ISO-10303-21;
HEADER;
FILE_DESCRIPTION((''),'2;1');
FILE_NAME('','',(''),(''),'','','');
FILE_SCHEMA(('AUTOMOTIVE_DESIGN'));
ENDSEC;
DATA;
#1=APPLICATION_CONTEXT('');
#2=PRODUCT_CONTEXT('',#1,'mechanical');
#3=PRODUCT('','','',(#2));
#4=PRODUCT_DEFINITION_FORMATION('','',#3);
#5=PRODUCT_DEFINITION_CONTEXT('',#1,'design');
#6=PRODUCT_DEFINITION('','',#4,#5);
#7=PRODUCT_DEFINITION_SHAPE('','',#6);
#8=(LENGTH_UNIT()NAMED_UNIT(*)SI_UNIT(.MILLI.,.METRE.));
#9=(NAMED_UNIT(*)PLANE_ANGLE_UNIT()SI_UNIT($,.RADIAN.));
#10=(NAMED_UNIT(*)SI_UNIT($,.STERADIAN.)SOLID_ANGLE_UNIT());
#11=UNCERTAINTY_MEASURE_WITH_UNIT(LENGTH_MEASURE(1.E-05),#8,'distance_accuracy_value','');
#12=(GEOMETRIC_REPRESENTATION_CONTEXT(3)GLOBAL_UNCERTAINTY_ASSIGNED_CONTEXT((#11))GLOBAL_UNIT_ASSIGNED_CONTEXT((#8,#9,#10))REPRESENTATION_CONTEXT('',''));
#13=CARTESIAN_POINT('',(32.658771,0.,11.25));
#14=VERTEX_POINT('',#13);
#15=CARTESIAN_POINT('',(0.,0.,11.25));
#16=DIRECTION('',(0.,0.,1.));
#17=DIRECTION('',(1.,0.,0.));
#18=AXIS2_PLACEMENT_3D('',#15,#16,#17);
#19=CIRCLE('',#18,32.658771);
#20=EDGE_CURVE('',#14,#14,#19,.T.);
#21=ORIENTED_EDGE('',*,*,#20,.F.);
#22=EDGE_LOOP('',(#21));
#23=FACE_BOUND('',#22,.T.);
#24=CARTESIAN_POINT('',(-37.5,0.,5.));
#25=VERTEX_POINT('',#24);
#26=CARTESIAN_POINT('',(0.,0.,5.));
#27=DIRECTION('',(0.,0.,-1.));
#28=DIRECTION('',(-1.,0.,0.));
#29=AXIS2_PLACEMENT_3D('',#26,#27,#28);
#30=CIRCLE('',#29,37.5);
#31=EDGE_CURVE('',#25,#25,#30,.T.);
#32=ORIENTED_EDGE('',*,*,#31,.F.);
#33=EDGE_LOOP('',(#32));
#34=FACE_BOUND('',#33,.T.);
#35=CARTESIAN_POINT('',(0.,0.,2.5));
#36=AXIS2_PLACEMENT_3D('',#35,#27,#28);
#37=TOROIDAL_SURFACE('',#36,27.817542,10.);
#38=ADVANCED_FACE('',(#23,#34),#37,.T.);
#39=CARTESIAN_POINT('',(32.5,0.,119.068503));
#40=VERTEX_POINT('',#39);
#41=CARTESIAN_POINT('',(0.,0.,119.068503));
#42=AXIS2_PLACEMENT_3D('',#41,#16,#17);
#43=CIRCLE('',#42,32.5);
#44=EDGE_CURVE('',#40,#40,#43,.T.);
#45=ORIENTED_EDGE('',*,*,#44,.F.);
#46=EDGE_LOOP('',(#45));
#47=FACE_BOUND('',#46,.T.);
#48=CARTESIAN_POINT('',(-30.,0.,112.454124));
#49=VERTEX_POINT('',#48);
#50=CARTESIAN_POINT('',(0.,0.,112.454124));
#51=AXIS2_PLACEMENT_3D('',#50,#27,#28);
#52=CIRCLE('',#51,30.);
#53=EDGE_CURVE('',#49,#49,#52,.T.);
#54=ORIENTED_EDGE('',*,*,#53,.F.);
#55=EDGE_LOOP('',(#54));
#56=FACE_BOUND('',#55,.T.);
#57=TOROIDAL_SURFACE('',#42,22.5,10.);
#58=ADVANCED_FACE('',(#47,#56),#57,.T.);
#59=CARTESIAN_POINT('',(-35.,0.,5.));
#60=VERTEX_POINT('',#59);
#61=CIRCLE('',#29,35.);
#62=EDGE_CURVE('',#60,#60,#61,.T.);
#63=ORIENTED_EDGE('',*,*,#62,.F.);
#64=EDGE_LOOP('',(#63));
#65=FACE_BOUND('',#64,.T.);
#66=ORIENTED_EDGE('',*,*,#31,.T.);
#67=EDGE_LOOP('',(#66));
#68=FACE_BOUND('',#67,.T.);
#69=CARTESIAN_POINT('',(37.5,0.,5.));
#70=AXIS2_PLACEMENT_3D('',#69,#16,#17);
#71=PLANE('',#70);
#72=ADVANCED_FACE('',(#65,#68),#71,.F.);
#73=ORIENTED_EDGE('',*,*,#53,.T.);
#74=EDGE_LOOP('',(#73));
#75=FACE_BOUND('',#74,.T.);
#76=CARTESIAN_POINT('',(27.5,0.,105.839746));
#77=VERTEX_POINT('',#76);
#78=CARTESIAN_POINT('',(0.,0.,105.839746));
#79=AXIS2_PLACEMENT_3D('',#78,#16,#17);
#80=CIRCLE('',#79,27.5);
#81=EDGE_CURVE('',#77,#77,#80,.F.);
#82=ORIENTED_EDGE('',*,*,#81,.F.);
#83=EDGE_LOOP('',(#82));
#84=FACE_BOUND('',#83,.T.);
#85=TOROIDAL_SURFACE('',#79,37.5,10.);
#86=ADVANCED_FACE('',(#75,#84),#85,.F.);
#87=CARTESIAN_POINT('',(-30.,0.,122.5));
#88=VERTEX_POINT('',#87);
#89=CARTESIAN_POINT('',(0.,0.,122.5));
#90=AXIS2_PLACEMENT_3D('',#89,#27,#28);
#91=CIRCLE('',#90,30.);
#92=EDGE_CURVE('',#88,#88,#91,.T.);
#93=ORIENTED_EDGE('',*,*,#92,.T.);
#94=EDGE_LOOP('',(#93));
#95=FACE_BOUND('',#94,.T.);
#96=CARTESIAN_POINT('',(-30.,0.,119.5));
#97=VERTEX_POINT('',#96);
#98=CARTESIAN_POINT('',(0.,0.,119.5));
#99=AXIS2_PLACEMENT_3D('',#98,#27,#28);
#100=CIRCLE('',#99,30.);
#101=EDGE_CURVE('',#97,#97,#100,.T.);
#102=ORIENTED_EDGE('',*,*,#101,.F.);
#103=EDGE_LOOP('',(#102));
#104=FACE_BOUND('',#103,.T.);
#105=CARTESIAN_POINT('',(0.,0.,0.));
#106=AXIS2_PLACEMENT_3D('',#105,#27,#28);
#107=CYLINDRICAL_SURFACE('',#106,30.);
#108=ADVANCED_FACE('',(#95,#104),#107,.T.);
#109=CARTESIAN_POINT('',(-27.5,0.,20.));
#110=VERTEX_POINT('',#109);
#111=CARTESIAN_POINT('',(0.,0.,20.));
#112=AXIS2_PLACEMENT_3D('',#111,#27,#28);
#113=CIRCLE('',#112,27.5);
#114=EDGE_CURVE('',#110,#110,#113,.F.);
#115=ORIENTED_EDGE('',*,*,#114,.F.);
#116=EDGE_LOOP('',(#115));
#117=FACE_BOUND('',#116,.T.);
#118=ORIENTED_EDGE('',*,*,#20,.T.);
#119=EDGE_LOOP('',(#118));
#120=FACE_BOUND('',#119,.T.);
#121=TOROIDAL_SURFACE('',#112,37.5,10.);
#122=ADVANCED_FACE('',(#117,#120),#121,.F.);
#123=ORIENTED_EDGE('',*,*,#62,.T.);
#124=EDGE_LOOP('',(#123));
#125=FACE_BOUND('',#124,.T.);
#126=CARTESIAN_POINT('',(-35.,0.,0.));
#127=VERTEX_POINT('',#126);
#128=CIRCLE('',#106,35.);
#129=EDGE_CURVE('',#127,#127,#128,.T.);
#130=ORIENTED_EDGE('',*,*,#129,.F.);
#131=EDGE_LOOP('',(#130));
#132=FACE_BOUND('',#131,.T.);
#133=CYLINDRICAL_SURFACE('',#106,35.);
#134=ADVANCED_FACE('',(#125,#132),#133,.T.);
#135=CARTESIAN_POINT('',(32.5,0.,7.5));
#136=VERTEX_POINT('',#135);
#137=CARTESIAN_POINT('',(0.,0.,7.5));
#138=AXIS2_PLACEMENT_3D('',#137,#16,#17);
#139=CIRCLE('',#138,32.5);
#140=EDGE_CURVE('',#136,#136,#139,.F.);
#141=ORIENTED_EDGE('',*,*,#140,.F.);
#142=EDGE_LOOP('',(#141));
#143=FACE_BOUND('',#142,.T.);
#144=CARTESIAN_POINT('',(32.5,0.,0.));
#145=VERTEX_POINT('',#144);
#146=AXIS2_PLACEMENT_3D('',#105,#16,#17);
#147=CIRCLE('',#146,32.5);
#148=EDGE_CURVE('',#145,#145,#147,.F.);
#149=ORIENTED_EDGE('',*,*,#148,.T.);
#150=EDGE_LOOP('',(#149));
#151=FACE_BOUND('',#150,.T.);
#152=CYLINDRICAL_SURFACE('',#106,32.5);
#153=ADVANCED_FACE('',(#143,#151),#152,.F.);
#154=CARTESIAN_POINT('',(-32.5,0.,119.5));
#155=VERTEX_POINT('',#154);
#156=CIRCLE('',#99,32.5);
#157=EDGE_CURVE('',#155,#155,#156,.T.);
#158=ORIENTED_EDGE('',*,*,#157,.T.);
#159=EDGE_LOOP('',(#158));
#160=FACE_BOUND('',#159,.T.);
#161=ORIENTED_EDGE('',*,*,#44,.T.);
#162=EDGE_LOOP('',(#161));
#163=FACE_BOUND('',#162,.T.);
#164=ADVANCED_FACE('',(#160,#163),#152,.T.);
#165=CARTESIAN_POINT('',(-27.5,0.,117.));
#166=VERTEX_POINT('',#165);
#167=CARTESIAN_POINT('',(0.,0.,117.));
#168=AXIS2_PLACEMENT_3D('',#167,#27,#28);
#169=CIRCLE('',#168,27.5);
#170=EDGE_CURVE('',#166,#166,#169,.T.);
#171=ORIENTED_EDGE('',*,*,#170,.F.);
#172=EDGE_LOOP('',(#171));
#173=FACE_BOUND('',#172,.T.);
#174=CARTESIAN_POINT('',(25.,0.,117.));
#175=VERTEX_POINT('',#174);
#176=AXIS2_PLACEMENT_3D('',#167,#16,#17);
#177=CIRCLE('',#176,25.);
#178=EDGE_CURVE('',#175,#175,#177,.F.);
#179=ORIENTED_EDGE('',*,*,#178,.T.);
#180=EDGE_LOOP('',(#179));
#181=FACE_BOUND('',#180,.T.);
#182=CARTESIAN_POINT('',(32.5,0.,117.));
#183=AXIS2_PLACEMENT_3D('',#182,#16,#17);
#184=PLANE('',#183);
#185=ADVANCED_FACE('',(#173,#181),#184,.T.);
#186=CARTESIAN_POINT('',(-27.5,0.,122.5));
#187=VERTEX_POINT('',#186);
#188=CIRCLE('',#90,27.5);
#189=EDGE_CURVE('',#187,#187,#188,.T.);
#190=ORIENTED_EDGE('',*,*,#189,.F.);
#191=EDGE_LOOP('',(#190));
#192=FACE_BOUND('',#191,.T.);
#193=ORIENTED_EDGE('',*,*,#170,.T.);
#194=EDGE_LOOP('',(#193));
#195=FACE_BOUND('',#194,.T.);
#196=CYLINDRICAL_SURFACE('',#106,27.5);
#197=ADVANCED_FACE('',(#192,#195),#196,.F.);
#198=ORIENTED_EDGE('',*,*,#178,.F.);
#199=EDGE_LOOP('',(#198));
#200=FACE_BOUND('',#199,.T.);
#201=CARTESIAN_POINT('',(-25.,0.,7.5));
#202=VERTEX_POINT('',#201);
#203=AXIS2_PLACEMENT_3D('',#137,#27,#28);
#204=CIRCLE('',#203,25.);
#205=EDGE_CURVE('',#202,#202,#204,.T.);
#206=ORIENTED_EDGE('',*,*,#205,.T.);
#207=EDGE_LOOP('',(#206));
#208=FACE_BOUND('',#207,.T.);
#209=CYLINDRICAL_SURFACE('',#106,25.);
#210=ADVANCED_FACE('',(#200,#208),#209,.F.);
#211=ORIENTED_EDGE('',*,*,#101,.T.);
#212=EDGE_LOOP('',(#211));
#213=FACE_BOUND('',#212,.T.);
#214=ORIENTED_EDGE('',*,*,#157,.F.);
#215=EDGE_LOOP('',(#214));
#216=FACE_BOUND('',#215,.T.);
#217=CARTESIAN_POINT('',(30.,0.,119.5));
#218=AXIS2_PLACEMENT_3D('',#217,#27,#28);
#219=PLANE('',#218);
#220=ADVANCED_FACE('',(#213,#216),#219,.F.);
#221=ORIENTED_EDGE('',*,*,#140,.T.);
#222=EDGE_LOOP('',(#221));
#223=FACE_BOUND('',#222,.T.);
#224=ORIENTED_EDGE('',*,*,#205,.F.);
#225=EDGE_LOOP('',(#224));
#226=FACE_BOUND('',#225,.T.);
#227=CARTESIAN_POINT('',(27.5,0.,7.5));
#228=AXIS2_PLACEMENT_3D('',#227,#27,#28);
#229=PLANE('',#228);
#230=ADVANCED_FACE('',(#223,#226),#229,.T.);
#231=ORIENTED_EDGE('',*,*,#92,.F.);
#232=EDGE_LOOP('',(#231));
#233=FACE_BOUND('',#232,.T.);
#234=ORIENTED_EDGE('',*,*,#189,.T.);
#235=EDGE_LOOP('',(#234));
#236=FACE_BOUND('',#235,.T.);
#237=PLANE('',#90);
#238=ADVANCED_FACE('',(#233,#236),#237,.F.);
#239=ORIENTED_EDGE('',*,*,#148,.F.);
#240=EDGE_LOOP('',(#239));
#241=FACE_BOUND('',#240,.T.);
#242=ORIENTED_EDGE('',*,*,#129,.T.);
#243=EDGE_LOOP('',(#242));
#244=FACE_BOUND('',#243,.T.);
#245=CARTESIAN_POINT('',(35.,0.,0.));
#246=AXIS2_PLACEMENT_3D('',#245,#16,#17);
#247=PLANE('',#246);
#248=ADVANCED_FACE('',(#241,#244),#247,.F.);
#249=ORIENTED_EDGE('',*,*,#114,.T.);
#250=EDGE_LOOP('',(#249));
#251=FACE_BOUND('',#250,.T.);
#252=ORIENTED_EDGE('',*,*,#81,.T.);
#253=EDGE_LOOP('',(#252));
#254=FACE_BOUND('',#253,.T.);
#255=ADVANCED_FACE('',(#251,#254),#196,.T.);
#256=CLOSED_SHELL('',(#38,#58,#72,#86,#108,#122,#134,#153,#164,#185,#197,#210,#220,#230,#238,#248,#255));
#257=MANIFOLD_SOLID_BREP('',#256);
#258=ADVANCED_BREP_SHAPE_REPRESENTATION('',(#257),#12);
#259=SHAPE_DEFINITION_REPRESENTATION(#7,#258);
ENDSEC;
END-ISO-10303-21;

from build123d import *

# Parameters (mm, degrees)
SHELL1_OUTLINE_R     = 25
SHELL1_DEPTH         = 122.5
SHELL1_2_OUTLINE_R   = 32.5
SHELL1_2_OUTLINE_R_2 = 25
SHELL1_2_DEPTH       = 7.5
SHELL1_START         = 117
SHELL1_3_OUTLINE_R   = 27.5
SHELL1_3_OUTLINE_R_2 = 25
SHELL1_3_DEPTH       = 5.5
FILLET1_R            = 10
FILLET2_R            = 10


# Read off the part's stored shape, not the designer's step: Shell1
with BuildPart() as part:
    # Sketch1 → Revolve1 (revolve)
    with BuildSketch(Plane(origin=(0, 0, 0), x_dir=(1, 0, 0), z_dir=(0, 1, 0)), mode=Mode.PRIVATE) as revolve1_sk:
        Polygon((0, 0), (0, -122.5), (30, -122.5), (30, -119.5), (32.5, -119.5), (32.5, -114.5), (27.5, -114.5), (27.5, -10), (37.5, -10), (37.5, -5), (35, -5), (35, 0), align=None)
    revolve(revolve1_sk.sketch.rotate(Axis((0, 0, 0), (0, 0, 1)), 180), axis=Axis((0, 0, 0), (0, 0, 1)))

    # Shell1 outline → Shell1 (cut)
    with BuildSketch(Plane.XY):
        Circle(SHELL1_OUTLINE_R)
    extrude(amount=SHELL1_DEPTH, mode=Mode.SUBTRACT)

    # Shell1 2 outline → Shell1 2 (cut)
    with BuildSketch(Plane.XY):
        Circle(SHELL1_2_OUTLINE_R)
        Circle(SHELL1_2_OUTLINE_R_2, mode=Mode.SUBTRACT)
    extrude(amount=SHELL1_2_DEPTH, mode=Mode.SUBTRACT)

    # Shell1 3 outline → Shell1 3 (cut)
    with BuildSketch(Plane.XY.offset(SHELL1_START)):
        Circle(SHELL1_3_OUTLINE_R)
        Circle(SHELL1_3_OUTLINE_R_2, mode=Mode.SUBTRACT)
    extrude(amount=SHELL1_3_DEPTH, mode=Mode.SUBTRACT)

    # Fillet1
    # the kernel refuses this fillet: 10 mm, written as the material it adds along each edge
    with BuildSketch(Plane(origin=(0, 0, 10), x_dir=(-1, 0, 0), z_dir=(0, 1, 0))) as fillet1_piece_1:
        with BuildLine():
            CenterArc((27.5 + FILLET1_R, FILLET1_R), FILLET1_R, 180, 90)
            Line((27.5 + FILLET1_R, 0), (27.5 + FILLET1_R, -FILLET1_R * 0.02))
            Line((27.5 + FILLET1_R, -FILLET1_R * 0.02), (27.5 - FILLET1_R * 0.02, -FILLET1_R * 0.02))
            Line((27.5 - FILLET1_R * 0.02, -FILLET1_R * 0.02), (27.5 - FILLET1_R * 0.02, FILLET1_R))
            Line((27.5 - FILLET1_R * 0.02, FILLET1_R), (27.5, FILLET1_R))
        make_face()
    revolve(axis=Axis((0, 0, 10), (0, 0, 1)))
    with BuildSketch(Plane(origin=(0, 0, 114.5), x_dir=(-1, 0, 0), z_dir=(0, 1, 0))) as fillet1_piece_2:
        with BuildLine():
            CenterArc((37.5, -8.660254038), FILLET1_R, 120, 60)
            Line((27.5, -8.660254038), (27.3, -8.660254038))
            Line((27.3, -8.660254038), (27.3, 0))
            Line((27.3, 0), (27.5, 0.2))
            ThreePointArc((27.5, 0.2), (30, 0.2), (32.4, 0.173205081))
            Line((32.4, 0.173205081), (32.5, 0))
        make_face()
    revolve(axis=Axis((0, 0, 114.5), (0, 0, 1)))

    # Fillet2
    # the kernel refuses this fillet: 10 mm, written as the material it takes off along each edge
    with BuildSketch(Plane(origin=(0, 0, 10), x_dir=(-1, 0, 0), z_dir=(0, 1, 0))) as fillet2_piece_1:
        with BuildLine():
            CenterArc((27.817541634, -7.5), FILLET2_R, 14.477512186, 46.567463442)
            Line((37.5, -5), (37.693649167, -4.95))
            ThreePointArc((37.693649167, -4.95), (37.7, -2.5), (37.7, 0))
            Line((37.7, 0), (37.5, 0.2))
            ThreePointArc((37.5, 0.2), (35.05, 0.511190802), (32.755595401, 1.425))
            Line((32.755595401, 1.425), (32.658770817, 1.25))
        make_face()
    revolve(axis=Axis((0, 0, 10), (0, 0, 1)), mode=Mode.SUBTRACT)
    with BuildSketch(Plane(origin=(0, 0, 114.5), x_dir=(-1, 0, 0), z_dir=(0, 1, 0))) as fillet2_piece_2:
        with BuildLine():
            CenterArc((22.5, 4.568502517), FILLET2_R, 318.590377891, 41.409622109)
            Line((32.5, 4.568502517), (32.7, 4.568502517))
            Line((32.7, 4.568502517), (32.7, 0))
            Line((32.7, 0), (32.6, -0.173205081))
            ThreePointArc((32.6, -0.173205081), (31.293504258, -1.076098804), (30.15, -2.178163326))
            Line((30.15, -2.178163326), (30, -2.04587576))
        make_face()
    revolve(axis=Axis((0, 0, 114.5), (0, 0, 1)), mode=Mode.SUBTRACT)


solid = part.part
